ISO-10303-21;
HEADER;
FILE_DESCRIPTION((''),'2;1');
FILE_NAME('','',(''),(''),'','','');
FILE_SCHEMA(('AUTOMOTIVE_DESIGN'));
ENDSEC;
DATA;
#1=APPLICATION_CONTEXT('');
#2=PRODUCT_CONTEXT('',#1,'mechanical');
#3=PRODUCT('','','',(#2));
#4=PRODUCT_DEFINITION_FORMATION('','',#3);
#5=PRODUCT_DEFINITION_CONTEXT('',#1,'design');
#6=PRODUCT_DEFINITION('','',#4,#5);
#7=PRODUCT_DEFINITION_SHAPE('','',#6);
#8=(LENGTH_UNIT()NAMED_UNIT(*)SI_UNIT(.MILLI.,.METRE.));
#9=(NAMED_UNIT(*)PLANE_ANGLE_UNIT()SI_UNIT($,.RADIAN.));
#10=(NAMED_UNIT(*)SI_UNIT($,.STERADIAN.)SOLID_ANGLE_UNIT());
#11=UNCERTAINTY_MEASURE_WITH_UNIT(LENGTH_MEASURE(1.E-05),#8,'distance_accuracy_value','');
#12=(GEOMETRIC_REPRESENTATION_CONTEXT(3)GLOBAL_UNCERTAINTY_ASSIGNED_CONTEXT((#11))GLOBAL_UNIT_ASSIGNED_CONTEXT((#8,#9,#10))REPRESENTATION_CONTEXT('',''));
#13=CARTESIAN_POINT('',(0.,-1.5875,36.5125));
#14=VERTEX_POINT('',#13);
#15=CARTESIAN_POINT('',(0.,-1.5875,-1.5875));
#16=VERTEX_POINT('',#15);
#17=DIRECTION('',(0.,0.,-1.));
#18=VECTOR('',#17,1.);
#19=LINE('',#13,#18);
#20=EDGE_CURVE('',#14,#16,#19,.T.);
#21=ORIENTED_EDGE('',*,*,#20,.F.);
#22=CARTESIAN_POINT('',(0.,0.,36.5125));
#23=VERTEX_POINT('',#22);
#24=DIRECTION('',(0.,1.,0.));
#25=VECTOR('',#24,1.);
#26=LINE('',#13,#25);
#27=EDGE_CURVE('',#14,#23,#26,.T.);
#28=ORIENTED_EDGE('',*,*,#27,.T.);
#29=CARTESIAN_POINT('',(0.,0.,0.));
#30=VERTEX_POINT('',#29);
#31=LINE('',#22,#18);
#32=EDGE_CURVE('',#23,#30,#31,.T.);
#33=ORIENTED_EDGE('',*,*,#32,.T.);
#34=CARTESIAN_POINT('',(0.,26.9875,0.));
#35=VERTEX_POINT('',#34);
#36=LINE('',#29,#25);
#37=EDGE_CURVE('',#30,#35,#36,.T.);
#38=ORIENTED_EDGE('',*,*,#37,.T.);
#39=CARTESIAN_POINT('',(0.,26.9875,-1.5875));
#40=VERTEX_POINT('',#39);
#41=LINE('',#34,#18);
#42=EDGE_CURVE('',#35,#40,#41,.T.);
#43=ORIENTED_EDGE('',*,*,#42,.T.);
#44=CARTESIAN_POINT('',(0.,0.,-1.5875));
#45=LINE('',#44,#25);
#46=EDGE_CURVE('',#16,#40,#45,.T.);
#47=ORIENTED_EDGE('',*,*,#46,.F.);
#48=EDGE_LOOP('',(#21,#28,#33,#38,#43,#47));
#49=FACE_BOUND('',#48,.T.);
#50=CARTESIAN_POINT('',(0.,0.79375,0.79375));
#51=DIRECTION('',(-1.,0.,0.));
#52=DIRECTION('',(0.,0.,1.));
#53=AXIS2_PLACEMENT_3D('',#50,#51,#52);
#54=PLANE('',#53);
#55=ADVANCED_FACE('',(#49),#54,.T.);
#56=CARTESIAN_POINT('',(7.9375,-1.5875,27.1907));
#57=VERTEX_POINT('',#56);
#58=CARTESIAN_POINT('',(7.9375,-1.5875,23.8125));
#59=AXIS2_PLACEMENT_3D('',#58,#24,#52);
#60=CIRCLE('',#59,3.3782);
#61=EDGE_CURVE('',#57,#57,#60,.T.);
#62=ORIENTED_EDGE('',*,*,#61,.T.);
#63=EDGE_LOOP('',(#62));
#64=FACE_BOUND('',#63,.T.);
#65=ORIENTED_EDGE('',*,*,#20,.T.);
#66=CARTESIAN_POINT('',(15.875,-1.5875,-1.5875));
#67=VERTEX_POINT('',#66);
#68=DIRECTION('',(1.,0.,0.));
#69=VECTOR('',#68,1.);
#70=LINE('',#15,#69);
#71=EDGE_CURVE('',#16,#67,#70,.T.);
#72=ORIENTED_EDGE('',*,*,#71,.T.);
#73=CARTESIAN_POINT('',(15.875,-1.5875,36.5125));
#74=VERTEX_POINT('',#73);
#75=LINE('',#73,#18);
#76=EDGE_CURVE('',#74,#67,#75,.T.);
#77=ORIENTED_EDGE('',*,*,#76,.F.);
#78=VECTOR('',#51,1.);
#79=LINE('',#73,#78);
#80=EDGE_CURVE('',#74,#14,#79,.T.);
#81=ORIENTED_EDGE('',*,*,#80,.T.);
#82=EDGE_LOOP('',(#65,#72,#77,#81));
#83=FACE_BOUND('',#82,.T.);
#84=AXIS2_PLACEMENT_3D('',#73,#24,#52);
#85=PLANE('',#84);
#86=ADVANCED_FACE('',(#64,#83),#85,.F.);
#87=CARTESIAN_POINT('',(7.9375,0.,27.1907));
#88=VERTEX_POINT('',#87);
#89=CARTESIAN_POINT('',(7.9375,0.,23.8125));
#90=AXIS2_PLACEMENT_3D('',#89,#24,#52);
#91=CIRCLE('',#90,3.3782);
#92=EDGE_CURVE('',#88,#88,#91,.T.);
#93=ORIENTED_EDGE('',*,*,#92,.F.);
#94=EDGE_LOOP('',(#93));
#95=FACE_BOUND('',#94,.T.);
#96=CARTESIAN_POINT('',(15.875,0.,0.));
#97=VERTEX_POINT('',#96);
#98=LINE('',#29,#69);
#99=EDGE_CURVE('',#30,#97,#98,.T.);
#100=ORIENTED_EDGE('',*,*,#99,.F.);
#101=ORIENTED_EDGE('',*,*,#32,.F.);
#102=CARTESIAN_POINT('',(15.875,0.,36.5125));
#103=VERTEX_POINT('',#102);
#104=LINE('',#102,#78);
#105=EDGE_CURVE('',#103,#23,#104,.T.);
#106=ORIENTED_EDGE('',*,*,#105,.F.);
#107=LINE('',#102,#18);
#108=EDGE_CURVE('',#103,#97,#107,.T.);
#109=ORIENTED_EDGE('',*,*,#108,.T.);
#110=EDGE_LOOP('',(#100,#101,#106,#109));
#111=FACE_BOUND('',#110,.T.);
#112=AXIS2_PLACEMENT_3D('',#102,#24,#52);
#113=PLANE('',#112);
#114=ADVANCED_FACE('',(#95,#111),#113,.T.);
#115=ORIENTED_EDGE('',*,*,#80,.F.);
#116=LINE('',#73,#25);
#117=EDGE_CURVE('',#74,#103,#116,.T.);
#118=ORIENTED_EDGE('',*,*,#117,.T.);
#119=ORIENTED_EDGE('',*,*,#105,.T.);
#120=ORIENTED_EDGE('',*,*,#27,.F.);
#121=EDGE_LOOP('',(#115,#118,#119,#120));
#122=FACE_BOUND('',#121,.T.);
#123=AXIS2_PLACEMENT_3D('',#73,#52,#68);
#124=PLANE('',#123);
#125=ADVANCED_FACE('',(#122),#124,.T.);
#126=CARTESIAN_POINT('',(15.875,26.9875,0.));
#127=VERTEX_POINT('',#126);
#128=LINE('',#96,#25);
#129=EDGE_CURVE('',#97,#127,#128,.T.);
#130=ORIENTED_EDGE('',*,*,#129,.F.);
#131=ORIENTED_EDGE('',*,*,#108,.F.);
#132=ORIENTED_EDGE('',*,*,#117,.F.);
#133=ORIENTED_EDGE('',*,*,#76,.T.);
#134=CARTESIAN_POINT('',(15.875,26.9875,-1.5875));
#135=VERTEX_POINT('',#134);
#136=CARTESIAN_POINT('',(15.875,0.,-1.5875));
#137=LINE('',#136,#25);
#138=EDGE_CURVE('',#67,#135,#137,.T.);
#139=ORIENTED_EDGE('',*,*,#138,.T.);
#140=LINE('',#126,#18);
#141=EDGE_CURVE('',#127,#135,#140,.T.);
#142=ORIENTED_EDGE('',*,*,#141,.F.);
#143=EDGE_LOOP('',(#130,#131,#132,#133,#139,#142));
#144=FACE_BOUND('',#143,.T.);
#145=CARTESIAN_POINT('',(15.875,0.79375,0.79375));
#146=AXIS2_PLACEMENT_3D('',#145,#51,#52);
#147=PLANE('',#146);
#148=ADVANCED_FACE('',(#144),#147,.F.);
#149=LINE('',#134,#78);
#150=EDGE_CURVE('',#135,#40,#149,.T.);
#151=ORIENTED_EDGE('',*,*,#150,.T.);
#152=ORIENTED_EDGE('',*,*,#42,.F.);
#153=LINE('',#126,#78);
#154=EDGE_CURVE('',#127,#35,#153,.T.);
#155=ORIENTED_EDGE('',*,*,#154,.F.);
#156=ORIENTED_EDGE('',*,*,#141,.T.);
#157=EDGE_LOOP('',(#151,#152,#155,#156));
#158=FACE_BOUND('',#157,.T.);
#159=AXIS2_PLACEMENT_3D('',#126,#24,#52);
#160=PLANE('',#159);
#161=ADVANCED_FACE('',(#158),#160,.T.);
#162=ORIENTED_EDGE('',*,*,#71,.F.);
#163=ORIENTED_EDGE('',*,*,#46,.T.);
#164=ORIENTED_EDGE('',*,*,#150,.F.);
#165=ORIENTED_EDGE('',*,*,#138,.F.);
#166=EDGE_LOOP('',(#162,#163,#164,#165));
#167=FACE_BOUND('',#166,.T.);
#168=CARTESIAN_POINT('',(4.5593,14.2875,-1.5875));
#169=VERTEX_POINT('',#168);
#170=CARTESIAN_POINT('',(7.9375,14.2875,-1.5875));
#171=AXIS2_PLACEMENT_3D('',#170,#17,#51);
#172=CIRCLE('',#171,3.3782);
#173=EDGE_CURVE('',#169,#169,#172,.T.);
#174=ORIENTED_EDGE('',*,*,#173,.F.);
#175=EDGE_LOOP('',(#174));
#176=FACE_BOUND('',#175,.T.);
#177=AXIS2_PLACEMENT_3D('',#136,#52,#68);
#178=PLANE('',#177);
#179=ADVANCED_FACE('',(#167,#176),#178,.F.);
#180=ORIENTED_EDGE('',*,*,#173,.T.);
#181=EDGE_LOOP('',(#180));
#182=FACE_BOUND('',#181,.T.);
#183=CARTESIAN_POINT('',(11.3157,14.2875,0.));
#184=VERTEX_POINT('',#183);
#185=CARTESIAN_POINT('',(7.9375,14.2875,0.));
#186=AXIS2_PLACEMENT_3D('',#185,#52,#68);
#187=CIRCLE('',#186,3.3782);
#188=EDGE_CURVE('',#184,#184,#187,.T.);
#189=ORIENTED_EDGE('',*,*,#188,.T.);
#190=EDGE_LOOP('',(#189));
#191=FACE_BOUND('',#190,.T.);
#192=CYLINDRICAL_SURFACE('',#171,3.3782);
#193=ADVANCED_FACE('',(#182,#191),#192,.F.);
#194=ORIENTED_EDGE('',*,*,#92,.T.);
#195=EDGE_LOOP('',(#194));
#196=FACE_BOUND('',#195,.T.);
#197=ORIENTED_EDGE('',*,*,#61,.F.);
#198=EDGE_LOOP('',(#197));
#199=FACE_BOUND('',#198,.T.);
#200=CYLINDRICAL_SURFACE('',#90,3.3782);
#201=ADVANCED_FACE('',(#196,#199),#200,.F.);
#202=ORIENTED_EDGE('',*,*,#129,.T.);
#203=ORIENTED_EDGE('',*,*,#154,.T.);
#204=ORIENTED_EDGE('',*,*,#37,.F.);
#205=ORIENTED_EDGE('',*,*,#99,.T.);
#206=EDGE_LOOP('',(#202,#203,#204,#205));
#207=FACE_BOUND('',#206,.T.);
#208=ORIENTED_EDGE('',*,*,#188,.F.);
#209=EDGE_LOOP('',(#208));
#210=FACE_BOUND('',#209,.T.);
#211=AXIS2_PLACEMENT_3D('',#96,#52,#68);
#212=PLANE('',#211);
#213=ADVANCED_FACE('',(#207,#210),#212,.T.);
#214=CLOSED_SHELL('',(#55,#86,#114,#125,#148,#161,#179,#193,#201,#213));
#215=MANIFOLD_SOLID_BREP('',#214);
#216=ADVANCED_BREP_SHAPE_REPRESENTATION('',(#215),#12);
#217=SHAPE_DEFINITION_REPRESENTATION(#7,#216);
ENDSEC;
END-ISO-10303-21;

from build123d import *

# Parameters (mm, degrees)
BASE_FLANGE1_DEPTH      = 15.875
F_1_4_CLEARANCE_HOLE1_D = 6.7564
F_1_4_CLEARANCE_HOLE2_D = 6.7564
BOSS_EXTRUDE1_DEPTH     = 15.875
CUT_EXTRUDE1_DEPTH      = 49.098892269
BOSS_EXTRUDE2_DEPTH     = 1.5875
BOSS_EXTRUDE3_DEPTH     = 1.5875


# Read off the part's stored shape, not the designer's step: Base-Flange1
with BuildPart() as part:
    # Base-Flange1 outline → Base-Flange1 (new body)
    with BuildSketch(Plane(origin=(0, 0, 0), x_dir=(0, 0, -1), z_dir=(1, 0, 0))):
        with BuildLine():
            Line((1.5875, 0.79375), (1.5875, 26.9875))
            Line((1.5875, 26.9875), (0, 26.9875))
            Line((0, 26.9875), (0, 0.79375))
            ThreePointArc((0, 0.79375), (-0.232483992, 0.232483992), (-0.79375, 0))
            Line((-0.79375, 0), (-36.5125, 0))
            Line((-36.5125, 0), (-36.5125, -1.5875))
            Line((-36.5125, -1.5875), (-0.79375, -1.5875))
            ThreePointArc((-0.79375, -1.5875), (0.890048023, -0.890048023), (1.5875, 0.79375))
        make_face()
    extrude(amount=BASE_FLANGE1_DEPTH)

    # 1/4 Clearance Hole1 (through all)
    with Locations(Plane(origin=(0, 0, -1.5875), x_dir=(-1, 0, 0), z_dir=(0, 0, -1))):
        with Locations((-7.9375, 14.2875)):
            Hole(F_1_4_CLEARANCE_HOLE1_D / 2)

    # 1/4 Clearance Hole2 (through all)
    with Locations(Plane(origin=(0, 0, 0), x_dir=(1, 0, 0), z_dir=(0, 1, 0))):
        with Locations((7.9375, -23.8125)):
            Hole(F_1_4_CLEARANCE_HOLE2_D / 2)

    # Sketch11 → Boss-Extrude1 (add, through all)
    with BuildSketch(Plane(origin=(15.875, 0, 0), x_dir=(0, 0, -1), z_dir=(1, 0, 0))):
        with BuildLine():
            Line((1.5875, 0.79375), (1.5875, -1.5875))
            Line((1.5875, -1.5875), (-0.79375, -1.5875))
            ThreePointArc((-0.79375, -1.5875), (0.890048023, -0.890048023), (1.5875, 0.79375))
        make_face()
    extrude(amount=-BOSS_EXTRUDE1_DEPTH)

    # Sketch12 → Cut-Extrude1 (cut, through all)
    with BuildSketch(Plane(origin=(15.875, 0, 0), x_dir=(0, 0, -1), z_dir=(1, 0, 0))):
        with BuildLine():
            Line((-0.79375, 0), (0, 0))
            Line((0, 0), (0, 0.79375))
            ThreePointArc((0, 0.79375), (-0.232483992, 0.232483992), (-0.79375, 0))
        make_face()
    extrude(amount=-CUT_EXTRUDE1_DEPTH, mode=Mode.SUBTRACT)

    # Sketch13 → Boss-Extrude2 (add)
    with BuildSketch(Plane(origin=(15.875, 0, 0), x_dir=(0, 0, -1), z_dir=(1, 0, 0))):
        Polygon((0, 0), (0, 26.9875), (1.5875, 26.9875), (1.5875, -1.5875), (-36.5125, -1.5875), (-36.5125, 0), align=None)
    extrude(amount=-BOSS_EXTRUDE2_DEPTH)

    # Sketch14 → Boss-Extrude3 (add)
    with BuildSketch(Plane.ZY):
        Polygon((0, 0), (0, 26.9875), (-1.5875, 26.9875), (-1.5875, -1.5875), (36.5125, -1.5875), (36.5125, 0), align=None)
    extrude(amount=-BOSS_EXTRUDE3_DEPTH)


solid = part.part
